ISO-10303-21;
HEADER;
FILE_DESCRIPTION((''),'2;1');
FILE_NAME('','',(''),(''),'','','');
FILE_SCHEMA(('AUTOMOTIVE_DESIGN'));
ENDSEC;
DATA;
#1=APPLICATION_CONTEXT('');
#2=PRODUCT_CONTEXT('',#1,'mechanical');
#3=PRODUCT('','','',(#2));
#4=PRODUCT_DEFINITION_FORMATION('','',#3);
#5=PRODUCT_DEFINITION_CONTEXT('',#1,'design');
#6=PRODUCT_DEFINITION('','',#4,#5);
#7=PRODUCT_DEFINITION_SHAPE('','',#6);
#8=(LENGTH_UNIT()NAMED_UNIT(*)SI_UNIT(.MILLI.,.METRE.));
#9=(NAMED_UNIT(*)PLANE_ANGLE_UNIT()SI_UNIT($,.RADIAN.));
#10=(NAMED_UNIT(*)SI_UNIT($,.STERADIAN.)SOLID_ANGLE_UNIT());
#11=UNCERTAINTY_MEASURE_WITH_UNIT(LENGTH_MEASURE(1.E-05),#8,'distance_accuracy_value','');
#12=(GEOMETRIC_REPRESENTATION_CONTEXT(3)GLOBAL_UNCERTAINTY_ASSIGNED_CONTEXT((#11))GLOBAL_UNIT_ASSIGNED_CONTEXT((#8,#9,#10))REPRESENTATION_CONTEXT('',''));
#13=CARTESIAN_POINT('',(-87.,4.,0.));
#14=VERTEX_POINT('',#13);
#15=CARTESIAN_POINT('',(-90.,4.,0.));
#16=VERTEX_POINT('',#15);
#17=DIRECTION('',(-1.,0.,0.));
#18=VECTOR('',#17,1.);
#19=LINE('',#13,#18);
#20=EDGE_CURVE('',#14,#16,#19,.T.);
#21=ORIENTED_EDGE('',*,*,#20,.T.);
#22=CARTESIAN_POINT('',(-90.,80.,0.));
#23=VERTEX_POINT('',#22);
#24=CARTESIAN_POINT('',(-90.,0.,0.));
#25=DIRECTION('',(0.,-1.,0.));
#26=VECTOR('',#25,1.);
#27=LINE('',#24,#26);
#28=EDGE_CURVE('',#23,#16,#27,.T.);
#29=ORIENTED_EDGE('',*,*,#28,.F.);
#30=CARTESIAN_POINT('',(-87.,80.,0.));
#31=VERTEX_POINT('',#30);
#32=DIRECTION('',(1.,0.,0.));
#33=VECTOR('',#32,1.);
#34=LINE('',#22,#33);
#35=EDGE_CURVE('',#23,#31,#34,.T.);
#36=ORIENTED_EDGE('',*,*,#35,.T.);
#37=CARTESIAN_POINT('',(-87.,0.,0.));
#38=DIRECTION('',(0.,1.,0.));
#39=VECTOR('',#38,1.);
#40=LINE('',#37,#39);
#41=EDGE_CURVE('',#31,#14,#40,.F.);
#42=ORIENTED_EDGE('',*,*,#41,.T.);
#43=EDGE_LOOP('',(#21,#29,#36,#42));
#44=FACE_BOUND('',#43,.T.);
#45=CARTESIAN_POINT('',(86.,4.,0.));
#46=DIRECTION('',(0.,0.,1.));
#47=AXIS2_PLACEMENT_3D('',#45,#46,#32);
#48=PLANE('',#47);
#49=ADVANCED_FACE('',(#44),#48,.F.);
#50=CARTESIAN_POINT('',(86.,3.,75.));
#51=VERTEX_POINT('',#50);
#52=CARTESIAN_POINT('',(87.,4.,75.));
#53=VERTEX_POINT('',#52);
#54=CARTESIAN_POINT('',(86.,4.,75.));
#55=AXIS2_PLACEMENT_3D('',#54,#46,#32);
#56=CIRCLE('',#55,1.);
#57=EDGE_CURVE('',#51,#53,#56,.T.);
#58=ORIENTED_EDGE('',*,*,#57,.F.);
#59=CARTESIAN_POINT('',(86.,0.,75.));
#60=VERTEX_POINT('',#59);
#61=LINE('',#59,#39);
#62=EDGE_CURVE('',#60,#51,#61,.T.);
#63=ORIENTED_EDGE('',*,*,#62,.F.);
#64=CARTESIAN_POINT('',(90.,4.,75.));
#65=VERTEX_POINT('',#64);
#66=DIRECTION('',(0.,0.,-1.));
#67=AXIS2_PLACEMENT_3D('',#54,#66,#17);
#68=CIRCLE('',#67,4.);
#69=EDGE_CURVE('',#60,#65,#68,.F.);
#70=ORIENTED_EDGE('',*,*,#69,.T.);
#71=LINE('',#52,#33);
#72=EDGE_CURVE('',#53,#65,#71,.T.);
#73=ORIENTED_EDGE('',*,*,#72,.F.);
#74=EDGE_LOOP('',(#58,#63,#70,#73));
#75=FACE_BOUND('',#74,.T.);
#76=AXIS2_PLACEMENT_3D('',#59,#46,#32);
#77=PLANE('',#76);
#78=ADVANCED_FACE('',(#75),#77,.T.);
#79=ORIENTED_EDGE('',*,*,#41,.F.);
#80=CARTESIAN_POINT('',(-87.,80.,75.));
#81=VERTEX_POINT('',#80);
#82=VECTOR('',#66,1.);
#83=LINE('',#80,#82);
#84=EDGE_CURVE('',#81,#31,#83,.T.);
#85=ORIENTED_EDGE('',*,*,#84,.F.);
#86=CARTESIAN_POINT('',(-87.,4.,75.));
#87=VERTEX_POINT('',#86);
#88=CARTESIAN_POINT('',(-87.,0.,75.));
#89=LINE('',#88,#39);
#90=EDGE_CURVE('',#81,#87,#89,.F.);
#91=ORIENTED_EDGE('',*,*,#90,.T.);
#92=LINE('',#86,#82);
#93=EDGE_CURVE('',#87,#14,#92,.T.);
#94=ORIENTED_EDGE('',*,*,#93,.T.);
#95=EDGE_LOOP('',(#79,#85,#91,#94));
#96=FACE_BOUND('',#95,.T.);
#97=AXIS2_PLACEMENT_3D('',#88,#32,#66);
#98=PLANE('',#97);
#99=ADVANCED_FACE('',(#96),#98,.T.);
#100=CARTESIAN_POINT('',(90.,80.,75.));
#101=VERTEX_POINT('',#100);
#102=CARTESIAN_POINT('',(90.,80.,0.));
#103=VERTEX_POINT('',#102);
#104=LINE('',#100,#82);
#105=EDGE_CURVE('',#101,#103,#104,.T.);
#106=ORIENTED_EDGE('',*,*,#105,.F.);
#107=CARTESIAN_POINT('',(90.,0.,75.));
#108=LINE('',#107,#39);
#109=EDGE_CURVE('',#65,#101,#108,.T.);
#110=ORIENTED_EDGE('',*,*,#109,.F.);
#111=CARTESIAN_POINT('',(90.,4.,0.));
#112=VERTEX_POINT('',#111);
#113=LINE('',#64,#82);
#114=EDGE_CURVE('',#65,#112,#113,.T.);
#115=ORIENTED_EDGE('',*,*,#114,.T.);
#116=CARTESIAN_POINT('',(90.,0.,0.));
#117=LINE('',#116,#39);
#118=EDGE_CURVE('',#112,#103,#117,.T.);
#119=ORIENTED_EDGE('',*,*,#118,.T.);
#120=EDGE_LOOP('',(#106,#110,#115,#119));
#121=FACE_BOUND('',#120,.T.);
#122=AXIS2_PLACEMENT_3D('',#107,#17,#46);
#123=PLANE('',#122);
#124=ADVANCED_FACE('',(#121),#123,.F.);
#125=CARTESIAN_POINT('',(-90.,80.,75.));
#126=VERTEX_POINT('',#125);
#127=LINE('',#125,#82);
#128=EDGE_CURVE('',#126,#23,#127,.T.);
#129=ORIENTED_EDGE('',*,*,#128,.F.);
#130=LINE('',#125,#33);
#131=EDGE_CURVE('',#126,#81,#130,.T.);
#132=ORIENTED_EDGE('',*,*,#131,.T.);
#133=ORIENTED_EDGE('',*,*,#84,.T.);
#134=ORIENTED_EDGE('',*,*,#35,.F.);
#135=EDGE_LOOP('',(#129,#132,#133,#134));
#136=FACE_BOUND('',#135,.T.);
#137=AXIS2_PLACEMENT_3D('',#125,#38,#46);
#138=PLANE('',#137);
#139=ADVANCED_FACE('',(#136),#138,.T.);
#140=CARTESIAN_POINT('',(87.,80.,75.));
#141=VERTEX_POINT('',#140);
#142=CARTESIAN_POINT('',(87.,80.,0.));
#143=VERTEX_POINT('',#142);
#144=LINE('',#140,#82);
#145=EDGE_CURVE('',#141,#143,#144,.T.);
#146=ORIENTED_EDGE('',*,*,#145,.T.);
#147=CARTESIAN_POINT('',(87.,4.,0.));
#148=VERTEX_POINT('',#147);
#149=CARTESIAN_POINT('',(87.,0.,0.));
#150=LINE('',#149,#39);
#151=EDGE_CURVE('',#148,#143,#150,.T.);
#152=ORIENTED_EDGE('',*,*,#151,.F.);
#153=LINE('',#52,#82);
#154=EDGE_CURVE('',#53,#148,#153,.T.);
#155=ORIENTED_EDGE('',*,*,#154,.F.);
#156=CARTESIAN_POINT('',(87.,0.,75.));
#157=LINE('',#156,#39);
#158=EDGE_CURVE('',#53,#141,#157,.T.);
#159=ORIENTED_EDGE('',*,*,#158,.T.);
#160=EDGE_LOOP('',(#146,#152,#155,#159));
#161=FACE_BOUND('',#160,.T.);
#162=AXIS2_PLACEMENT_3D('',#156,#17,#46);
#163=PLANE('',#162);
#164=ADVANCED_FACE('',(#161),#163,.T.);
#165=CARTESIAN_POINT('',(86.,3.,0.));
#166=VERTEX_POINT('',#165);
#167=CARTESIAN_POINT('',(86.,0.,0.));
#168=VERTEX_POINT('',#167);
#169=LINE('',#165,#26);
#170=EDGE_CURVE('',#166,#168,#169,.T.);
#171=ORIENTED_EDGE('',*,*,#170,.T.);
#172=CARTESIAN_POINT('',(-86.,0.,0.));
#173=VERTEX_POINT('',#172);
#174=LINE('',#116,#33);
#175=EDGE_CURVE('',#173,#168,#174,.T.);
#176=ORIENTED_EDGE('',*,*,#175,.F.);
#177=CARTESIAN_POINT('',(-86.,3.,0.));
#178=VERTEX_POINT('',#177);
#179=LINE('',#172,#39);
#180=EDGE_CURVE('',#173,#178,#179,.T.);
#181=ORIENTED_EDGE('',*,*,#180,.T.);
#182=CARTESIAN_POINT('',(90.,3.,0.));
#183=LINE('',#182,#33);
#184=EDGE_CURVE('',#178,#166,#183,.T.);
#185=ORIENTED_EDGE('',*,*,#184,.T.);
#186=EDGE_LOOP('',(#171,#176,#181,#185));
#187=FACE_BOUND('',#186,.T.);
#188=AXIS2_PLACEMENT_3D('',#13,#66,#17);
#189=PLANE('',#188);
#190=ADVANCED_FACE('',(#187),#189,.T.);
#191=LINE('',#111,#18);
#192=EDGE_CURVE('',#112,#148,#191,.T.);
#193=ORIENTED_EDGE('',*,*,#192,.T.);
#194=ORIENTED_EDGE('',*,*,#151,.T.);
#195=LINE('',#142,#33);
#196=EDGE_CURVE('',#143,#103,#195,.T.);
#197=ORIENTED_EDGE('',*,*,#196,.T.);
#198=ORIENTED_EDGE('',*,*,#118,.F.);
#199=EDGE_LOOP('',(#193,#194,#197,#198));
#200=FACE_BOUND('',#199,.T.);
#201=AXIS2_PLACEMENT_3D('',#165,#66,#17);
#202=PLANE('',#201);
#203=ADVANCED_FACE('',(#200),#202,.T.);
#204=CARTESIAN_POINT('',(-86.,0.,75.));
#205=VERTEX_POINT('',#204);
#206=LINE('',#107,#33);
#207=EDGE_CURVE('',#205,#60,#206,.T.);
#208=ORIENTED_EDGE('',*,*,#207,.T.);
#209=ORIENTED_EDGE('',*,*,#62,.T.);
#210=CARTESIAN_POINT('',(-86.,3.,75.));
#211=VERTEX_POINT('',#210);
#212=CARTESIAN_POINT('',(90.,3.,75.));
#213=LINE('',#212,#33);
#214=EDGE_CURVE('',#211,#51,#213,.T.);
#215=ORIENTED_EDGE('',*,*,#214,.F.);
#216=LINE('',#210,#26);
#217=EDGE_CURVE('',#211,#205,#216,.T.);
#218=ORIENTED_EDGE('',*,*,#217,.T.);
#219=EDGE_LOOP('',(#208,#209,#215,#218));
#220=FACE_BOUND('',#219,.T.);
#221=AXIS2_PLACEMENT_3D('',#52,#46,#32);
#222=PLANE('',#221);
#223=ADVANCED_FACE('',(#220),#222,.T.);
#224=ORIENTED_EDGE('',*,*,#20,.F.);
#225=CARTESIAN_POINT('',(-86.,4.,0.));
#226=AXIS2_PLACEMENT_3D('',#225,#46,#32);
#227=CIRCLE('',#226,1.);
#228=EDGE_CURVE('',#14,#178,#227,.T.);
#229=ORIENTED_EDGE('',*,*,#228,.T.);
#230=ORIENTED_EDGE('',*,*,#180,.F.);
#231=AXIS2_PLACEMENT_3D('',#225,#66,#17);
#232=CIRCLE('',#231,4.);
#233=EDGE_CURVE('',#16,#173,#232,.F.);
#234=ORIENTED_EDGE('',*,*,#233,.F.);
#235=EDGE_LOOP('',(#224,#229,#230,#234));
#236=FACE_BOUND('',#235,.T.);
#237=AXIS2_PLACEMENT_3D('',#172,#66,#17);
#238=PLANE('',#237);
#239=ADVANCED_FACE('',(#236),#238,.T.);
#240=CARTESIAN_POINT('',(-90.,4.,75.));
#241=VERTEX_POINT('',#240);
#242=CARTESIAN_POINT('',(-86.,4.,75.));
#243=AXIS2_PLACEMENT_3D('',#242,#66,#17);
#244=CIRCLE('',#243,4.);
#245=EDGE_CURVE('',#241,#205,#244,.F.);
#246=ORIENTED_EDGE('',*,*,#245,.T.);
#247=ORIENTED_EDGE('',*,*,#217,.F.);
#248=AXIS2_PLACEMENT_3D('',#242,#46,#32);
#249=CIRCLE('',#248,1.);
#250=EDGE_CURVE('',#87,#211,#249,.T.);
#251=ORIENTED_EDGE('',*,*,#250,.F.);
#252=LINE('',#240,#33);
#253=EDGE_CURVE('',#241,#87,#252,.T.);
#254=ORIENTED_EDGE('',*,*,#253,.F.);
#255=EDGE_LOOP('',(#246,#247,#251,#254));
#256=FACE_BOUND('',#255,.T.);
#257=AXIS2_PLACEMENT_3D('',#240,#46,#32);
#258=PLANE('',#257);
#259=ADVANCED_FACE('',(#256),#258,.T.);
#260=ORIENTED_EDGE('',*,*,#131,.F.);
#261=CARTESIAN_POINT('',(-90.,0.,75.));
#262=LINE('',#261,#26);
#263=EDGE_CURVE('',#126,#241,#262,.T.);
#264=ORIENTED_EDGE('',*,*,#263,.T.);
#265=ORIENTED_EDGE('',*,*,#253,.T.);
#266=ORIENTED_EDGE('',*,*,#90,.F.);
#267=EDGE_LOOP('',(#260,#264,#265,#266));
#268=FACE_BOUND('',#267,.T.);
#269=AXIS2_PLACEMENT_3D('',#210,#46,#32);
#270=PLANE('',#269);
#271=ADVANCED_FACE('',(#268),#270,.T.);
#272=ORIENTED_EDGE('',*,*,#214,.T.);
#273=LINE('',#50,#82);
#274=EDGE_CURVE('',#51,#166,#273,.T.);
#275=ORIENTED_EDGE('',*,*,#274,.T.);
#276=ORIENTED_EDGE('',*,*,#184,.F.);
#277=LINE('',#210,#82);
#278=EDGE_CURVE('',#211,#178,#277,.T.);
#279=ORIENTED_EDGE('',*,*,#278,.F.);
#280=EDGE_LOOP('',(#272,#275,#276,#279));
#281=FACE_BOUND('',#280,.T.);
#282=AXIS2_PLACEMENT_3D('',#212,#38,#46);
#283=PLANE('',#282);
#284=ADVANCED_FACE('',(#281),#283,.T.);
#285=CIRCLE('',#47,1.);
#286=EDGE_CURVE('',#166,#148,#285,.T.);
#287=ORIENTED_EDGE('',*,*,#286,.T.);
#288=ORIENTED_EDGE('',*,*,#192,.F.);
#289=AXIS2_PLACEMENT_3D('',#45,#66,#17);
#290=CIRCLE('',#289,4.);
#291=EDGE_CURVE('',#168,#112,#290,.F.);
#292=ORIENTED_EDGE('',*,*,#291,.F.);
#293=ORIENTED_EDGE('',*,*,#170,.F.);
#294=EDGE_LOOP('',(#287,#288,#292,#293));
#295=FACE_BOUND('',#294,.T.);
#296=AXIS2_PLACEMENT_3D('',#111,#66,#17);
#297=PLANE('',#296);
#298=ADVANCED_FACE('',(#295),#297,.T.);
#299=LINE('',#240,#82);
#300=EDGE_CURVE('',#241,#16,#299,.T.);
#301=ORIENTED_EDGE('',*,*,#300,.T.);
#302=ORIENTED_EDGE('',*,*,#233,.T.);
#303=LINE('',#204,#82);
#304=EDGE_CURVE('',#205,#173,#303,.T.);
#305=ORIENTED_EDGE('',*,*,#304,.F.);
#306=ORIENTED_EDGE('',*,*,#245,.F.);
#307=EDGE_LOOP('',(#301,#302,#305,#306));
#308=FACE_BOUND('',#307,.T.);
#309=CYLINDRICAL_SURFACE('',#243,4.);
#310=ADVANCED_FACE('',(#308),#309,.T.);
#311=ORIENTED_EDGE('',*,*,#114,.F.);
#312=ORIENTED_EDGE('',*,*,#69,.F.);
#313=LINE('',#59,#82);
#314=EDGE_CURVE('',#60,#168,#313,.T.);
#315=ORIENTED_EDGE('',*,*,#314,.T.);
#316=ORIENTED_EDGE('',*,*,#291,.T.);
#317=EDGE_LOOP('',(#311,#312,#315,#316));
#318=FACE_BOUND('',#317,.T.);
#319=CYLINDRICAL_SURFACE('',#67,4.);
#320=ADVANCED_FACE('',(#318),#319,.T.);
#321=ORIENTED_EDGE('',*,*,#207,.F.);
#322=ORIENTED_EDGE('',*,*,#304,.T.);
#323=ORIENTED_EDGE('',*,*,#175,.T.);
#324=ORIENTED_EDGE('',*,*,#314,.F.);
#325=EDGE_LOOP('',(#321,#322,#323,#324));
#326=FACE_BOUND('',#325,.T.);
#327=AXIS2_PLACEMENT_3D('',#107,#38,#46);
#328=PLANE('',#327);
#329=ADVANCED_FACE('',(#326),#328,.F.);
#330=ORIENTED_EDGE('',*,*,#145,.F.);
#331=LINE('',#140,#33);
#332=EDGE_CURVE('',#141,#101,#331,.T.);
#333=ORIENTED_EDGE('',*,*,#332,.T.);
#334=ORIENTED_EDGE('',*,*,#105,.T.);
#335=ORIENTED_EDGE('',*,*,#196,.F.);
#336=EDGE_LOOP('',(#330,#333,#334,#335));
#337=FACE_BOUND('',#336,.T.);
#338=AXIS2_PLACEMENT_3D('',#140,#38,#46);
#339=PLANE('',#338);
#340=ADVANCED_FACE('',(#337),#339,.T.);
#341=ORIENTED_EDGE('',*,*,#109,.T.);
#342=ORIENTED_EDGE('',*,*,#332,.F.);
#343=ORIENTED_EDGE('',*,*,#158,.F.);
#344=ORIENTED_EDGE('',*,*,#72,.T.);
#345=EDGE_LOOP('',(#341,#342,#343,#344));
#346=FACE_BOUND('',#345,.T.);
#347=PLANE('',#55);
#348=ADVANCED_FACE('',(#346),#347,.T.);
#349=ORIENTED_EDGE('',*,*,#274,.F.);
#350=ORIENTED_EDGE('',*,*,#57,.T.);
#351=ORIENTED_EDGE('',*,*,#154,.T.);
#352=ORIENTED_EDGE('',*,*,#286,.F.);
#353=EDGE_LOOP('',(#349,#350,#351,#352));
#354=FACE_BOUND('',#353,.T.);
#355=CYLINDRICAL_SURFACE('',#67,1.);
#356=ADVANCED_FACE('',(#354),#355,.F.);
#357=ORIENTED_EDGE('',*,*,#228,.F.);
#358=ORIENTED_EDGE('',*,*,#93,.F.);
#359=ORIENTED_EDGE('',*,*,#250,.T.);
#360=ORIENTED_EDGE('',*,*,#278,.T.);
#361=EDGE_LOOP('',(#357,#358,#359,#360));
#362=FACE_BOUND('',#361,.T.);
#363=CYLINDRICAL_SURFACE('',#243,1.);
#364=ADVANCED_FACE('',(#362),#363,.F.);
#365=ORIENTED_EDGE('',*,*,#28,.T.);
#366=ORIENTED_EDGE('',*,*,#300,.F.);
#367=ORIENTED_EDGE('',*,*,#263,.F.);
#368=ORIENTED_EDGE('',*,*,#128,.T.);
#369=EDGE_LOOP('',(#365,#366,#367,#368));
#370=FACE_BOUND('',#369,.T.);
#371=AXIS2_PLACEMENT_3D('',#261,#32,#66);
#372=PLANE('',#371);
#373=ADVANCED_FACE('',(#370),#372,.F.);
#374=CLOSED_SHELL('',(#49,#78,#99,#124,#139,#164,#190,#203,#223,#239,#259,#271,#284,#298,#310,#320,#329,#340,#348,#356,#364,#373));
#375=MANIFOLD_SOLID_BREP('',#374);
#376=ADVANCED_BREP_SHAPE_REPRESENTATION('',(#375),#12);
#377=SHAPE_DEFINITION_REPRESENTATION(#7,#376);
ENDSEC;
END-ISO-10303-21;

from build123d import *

# Parameters (mm, degrees)
SM_BASE_FLANGE_1_DEPTH = 75


# Sheet-metal steps are written as plain solids
with BuildPart() as part:
    # Sketch 1 → Базовая кромка1 (new body)
    with BuildSketch(Plane.XY):
        with BuildLine():
            Line((90, 80), (90, 4))
            ThreePointArc((90, 4), (88.828427125, 1.171572875), (86, 0))
            Line((86, 0), (-86, 0))
            ThreePointArc((-86, 0), (-88.828427125, 1.171572875), (-90, 4))
            Line((-90, 4), (-90, 80))
            Line((-90, 80), (-87, 80))
            Line((-87, 80), (-87, 4))
            ThreePointArc((-87, 4), (-86.707106781, 3.292893219), (-86, 3))
            Line((-86, 3), (86, 3))
            ThreePointArc((86, 3), (86.707106781, 3.292893219), (87, 4))
            Line((87, 4), (87, 80))
            Line((87, 80), (90, 80))
        make_face()
    extrude(amount=SM_BASE_FLANGE_1_DEPTH)


solid = part.part
